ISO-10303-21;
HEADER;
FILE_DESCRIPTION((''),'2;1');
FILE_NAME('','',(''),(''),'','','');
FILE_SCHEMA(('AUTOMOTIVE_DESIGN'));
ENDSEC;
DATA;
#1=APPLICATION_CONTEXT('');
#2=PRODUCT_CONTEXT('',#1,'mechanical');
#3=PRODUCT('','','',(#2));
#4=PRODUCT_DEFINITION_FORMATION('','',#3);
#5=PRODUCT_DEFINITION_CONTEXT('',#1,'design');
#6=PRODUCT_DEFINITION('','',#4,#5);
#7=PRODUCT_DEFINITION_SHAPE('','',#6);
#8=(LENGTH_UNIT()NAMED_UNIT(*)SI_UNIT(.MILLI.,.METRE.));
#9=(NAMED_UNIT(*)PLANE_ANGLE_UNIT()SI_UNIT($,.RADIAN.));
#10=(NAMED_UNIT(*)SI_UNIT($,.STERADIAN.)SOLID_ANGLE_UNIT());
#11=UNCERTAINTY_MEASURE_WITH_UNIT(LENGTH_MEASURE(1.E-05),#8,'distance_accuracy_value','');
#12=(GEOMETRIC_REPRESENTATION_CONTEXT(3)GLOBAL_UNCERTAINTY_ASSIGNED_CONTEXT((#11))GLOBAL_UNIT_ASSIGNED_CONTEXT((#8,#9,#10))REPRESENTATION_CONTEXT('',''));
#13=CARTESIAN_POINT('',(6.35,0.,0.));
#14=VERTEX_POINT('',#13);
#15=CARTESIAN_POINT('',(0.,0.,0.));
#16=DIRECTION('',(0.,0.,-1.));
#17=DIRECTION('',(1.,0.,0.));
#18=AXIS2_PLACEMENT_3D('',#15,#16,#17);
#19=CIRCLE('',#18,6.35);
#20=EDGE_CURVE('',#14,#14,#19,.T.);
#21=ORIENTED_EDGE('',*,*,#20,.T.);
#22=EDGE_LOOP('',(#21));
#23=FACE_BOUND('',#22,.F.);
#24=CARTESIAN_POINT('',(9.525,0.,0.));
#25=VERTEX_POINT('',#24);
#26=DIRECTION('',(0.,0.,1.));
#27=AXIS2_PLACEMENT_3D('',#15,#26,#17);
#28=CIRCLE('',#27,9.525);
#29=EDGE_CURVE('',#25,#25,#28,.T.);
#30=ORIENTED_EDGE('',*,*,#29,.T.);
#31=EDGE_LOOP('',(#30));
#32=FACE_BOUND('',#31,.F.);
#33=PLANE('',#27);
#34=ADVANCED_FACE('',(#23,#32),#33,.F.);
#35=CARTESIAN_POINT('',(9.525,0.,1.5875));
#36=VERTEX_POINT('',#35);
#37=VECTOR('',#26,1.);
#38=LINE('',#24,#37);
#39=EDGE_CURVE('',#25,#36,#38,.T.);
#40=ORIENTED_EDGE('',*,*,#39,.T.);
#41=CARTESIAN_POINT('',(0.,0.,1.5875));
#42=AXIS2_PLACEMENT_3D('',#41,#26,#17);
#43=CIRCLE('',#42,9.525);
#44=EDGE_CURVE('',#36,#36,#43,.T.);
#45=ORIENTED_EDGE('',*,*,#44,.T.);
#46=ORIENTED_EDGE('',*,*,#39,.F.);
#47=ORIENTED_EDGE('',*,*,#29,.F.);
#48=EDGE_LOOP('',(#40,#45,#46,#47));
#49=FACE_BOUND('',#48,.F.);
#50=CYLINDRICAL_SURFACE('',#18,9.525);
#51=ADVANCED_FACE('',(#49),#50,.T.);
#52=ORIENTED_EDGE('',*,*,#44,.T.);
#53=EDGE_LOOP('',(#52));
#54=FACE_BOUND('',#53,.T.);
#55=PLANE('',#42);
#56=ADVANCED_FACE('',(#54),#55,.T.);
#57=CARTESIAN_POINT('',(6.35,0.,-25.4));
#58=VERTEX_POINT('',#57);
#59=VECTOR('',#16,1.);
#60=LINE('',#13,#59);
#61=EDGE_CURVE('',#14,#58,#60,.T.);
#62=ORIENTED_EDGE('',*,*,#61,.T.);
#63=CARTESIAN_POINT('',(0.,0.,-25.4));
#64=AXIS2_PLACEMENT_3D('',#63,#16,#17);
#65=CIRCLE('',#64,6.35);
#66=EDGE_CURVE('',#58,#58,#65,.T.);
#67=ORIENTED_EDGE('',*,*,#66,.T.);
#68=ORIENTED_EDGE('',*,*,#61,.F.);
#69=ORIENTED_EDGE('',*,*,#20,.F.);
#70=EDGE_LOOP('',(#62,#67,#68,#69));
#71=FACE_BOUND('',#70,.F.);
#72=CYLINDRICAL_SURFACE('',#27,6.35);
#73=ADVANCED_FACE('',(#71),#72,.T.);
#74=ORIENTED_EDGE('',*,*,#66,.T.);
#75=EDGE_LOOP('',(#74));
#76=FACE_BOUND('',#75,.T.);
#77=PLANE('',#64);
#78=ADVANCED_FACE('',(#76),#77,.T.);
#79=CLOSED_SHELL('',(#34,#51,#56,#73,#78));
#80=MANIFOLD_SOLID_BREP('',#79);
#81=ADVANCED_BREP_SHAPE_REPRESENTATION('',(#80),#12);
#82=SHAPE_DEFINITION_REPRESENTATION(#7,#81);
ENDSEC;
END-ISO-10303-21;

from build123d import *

# Parameters (mm, degrees)
F0_R     = 9.525
F1_DEPTH = 1.5875
F2_R     = 6.35
F3_DEPTH = 25.4


# Not quite as in the source:
# - a length typed as a fraction of an inch, garbled in the dataset ("3 / 203.2 mm" for 3/8 in), is restored


with BuildPart() as f1:
    # F0 (on Top) → F1 (new body)
    with BuildSketch(Plane.XY):
        Circle(F0_R)
    extrude(amount=F1_DEPTH)

    # F2 (on face) → F3 (join)
    with BuildSketch(Plane(origin=(0, 0, 0), x_dir=(1, 0, 0), z_dir=(0, 0, -1))):
        Circle(F2_R)
    extrude(amount=F3_DEPTH)


solid = f1.part
